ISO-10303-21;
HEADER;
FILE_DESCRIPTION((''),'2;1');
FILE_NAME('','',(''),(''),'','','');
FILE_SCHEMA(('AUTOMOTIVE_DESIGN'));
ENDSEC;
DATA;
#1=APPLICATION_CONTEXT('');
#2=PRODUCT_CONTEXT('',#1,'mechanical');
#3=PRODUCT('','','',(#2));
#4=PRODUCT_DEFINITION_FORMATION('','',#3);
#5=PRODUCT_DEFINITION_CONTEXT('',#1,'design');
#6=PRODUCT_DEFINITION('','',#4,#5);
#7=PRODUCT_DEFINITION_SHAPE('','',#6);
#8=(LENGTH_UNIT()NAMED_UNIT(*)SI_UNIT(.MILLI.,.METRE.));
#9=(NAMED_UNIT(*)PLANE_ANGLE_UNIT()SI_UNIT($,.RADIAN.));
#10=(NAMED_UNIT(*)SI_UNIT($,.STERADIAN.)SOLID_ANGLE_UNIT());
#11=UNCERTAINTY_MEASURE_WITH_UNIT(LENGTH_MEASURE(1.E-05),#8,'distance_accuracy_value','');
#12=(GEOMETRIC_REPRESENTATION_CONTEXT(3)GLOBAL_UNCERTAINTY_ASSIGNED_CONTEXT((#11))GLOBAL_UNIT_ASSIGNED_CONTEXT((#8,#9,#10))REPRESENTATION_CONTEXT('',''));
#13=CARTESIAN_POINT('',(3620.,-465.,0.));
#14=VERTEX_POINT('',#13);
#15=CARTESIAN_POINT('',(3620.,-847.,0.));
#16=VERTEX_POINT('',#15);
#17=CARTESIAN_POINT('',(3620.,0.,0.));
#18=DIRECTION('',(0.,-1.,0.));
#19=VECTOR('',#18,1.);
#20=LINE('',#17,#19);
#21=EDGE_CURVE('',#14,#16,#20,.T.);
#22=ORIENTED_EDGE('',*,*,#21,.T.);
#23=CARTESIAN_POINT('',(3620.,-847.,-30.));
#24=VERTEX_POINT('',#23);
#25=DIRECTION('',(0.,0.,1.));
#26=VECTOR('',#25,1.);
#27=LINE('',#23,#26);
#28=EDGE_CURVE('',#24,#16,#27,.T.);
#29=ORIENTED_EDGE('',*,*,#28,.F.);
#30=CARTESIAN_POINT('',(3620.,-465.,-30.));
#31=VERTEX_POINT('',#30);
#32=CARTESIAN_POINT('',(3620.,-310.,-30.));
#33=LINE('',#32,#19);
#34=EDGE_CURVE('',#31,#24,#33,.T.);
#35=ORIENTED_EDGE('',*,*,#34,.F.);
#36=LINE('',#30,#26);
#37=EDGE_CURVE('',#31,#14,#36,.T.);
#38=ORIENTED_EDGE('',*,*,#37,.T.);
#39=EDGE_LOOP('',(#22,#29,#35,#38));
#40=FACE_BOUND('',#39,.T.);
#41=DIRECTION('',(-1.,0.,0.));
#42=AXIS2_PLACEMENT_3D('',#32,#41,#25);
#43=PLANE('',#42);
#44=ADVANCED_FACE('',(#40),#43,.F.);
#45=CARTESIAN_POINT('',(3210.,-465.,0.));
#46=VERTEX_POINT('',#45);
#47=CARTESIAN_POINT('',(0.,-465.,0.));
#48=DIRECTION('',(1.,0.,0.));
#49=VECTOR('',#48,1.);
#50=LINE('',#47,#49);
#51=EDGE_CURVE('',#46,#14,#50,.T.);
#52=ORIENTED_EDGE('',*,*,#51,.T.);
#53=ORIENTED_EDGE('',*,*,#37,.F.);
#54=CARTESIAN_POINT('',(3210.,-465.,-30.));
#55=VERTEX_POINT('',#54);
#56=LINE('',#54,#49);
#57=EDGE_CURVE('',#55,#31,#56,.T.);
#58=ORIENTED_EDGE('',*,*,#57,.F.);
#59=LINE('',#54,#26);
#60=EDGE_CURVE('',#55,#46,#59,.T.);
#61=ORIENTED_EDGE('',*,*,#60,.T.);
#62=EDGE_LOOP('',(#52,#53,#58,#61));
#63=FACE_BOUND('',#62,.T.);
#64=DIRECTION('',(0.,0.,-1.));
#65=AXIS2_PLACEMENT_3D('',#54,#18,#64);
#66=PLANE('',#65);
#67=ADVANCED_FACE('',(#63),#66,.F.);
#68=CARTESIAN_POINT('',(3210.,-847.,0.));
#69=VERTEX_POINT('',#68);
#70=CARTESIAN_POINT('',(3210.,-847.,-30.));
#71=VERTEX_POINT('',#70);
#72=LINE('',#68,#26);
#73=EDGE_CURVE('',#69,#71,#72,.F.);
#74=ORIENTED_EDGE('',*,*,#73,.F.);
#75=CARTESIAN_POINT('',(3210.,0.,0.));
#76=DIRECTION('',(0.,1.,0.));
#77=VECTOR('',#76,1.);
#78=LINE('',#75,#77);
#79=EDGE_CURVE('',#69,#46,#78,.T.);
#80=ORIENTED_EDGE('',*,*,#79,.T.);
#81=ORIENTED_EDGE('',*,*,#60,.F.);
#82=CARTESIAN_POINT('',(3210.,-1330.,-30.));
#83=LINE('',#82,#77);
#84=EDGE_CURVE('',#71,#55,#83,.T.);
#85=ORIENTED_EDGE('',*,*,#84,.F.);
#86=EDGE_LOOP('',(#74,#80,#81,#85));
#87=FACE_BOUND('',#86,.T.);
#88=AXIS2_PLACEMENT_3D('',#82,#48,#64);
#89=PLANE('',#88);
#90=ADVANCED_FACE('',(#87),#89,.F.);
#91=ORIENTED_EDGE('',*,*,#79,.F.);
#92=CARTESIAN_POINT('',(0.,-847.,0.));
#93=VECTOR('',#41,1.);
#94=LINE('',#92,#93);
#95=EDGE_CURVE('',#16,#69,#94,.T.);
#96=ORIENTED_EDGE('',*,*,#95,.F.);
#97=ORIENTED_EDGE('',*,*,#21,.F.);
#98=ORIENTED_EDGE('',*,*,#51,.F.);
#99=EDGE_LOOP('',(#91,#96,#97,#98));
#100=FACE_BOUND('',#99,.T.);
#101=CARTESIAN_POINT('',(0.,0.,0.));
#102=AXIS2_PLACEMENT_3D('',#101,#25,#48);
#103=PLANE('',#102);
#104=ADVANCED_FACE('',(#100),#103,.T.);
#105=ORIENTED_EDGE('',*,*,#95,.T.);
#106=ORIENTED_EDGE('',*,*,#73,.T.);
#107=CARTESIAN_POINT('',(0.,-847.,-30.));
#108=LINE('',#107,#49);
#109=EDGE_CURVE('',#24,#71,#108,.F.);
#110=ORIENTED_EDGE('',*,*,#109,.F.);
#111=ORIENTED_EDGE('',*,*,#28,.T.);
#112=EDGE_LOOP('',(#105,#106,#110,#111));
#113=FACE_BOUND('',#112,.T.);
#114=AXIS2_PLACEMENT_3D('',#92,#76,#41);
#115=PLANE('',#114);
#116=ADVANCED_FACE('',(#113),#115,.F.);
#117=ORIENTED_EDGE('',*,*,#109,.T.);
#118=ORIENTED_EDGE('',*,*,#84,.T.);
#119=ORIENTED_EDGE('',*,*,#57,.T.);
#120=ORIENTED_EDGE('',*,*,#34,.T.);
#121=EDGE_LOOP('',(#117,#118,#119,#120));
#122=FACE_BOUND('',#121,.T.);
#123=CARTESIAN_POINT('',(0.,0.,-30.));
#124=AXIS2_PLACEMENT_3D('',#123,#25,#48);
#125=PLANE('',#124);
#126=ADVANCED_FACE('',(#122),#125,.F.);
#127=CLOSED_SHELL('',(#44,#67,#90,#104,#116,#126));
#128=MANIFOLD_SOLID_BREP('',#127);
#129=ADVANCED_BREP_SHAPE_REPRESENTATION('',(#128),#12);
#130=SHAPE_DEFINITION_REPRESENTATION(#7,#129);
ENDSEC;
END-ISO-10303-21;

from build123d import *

# Parameters (mm, degrees)
TABAN_FLAN_1_DEPTH          = 30
KES_EKSTR_ZYON1_DEPTH       = 6325.626471184
KES_EKSTR_ZYON1_DEPTH_BACK  = 6325.626471184
IZIM2_W                     = 3213
IZIM2_H                     = 310
IZIM3_W                     = 24
IZIM3_H                     = 2000
SEKME1_DEPTH                = 30
KES_EKSTR_ZYON2_DEPTH       = 6348.399152409
KES_EKSTR_ZYON2_DEPTH_BACK  = 6348.399152409
IZIM4_W                     = 3210
IZIM4_H                     = 305
KES_EKSTR_ZYON3_DEPTH       = 6348.399152409
KES_EKSTR_ZYON3_DEPTH_BACK  = 6348.399152409
IZIM5_W                     = 3210
IZIM5_H                     = 405
KES_EKSTR_ZYON4_DEPTH       = 6348.399152409
KES_EKSTR_ZYON4_DEPTH_BACK  = 6348.399152409
IZIM6_W                     = 2910
IZIM6_H                     = 310
IZIM6_W_2                   = 300
IZIM7_W                     = 2811
IZIM7_H                     = 5
SEKME2_DEPTH                = 30
CUT_EXTRUDE1_DEPTH          = 6349.976374188
CUT_EXTRUDE1_DEPTH_BACK     = 6349.976374188
SKETCH1_W                   = 2835
SKETCH1_H                   = 1158
KES_EKSTR_ZYON5_DEPTH       = 6084.328447487
KES_EKSTR_ZYON5_DEPTH_BACK  = 6084.328447487
IZIM9_W                     = 2635
IZIM9_H                     = 310
IZIM10_W                    = 575
IZIM10_H                    = 2
SEKME3_DEPTH                = 30
KES_EKSTR_ZYON6_DEPTH       = 6084.328447487
KES_EKSTR_ZYON6_DEPTH_BACK  = 6084.328447487
IZIM13_W                    = 575
IZIM13_H                    = 2
KES_EKSTR_ZYON7_DEPTH       = 6084.328447487
KES_EKSTR_ZYON7_DEPTH_BACK  = 6084.328447487
KES_EKSTR_ZYON8_DEPTH       = 5441.42139912
KES_EKSTR_ZYON8_DEPTH_BACK  = 5441.42139912
IZIM16_W                    = 4
IZIM16_H                    = 537
KES_EKSTR_ZYON9_DEPTH       = 5437.470270313
KES_EKSTR_ZYON9_DEPTH_BACK  = 5437.470270313
IZIM17_W                    = 1750
IZIM17_H                    = 537
KES_EKSTR_ZYON10_DEPTH      = 3718.890396448
KES_EKSTR_ZYON10_DEPTH_BACK = 3718.890396448
IZIM18_W                    = 410
IZIM18_H                    = 155


# Sheet-metal steps are written as plain solids
with BuildPart() as part:
    # Çizim1 → Taban-Flanş1 (new body)
    with BuildSketch(Plane.XY):
        Polygon((0, 0), (0, -1640), (3210, -1640), (3210, -2000), (6000, -2000), (6000, 0), align=None)
    extrude(amount=-TABAN_FLAN_1_DEPTH)

    # Çizim2 → Kes-Ekstrüzyon1 (cut, two sides: drawn at the far end of the back side and taken through both)
    with BuildSketch(Plane.XY.offset(-KES_EKSTR_ZYON1_DEPTH_BACK)):
        with Locations((1606.5, -1485)):
            Rectangle(IZIM2_W, IZIM2_H)
    extrude(amount=KES_EKSTR_ZYON1_DEPTH + KES_EKSTR_ZYON1_DEPTH_BACK, mode=Mode.SUBTRACT)

    # Çizim3 → Sekme1 (add)
    with BuildSketch(Plane.XY):
        with Locations((6012, -1000)):
            Rectangle(IZIM3_W, IZIM3_H)
    extrude(amount=-SEKME1_DEPTH)

    # Çizim4 → Kes-Ekstrüzyon2 (cut, two sides: drawn at the far end of the back side and taken through both)
    with BuildSketch(Plane.XY.offset(-KES_EKSTR_ZYON2_DEPTH_BACK)):
        with Locations((1605, -1177.5)):
            Rectangle(IZIM4_W, IZIM4_H)
    extrude(amount=KES_EKSTR_ZYON2_DEPTH + KES_EKSTR_ZYON2_DEPTH_BACK, mode=Mode.SUBTRACT)

    # Çizim5 → Kes-Ekstrüzyon3 (cut, two sides: drawn at the far end of the back side and taken through both)
    with BuildSketch(Plane.XY.offset(-KES_EKSTR_ZYON3_DEPTH_BACK)):
        with Locations((1605, -822.5)):
            Rectangle(IZIM5_W, IZIM5_H)
    extrude(amount=KES_EKSTR_ZYON3_DEPTH + KES_EKSTR_ZYON3_DEPTH_BACK, mode=Mode.SUBTRACT)

    # Çizim6 → Kes-Ekstrüzyon4 (cut, two sides: drawn at the far end of the back side and taken through both)
    with BuildSketch(Plane.XY.offset(-KES_EKSTR_ZYON4_DEPTH_BACK)):
        with Locations((1455, -465)):
            Rectangle(IZIM6_W, IZIM6_H)
        with Locations((3060, -465)):
            Rectangle(IZIM6_W_2, IZIM6_H)
    extrude(amount=KES_EKSTR_ZYON4_DEPTH + KES_EKSTR_ZYON4_DEPTH_BACK, mode=Mode.SUBTRACT)

    # Çizim7 → Sekme2 (add)
    with BuildSketch(Plane.XY):
        with Locations((4618.5, -2002.5)):
            Rectangle(IZIM7_W, IZIM7_H)
    extrude(amount=-SEKME2_DEPTH)

    # Sketch1 → Cut-Extrude1 (cut, two sides: drawn at the far end of the back side and taken through both)
    with BuildSketch(Plane.XY.offset(-CUT_EXTRUDE1_DEPTH_BACK)):
        with Locations((4627.5, -1426)):
            Rectangle(SKETCH1_W, SKETCH1_H)
    extrude(amount=CUT_EXTRUDE1_DEPTH + CUT_EXTRUDE1_DEPTH_BACK, mode=Mode.SUBTRACT)

    # Çizim9 → Kes-Ekstrüzyon5 (cut, two sides: drawn at the far end of the back side and taken through both)
    with BuildSketch(Plane.XY.offset(-KES_EKSTR_ZYON5_DEPTH_BACK)):
        with Locations((1317.5, -155)):
            Rectangle(IZIM9_W, IZIM9_H)
    extrude(amount=KES_EKSTR_ZYON5_DEPTH + KES_EKSTR_ZYON5_DEPTH_BACK, mode=Mode.SUBTRACT)

    # Çizim10 → Sekme3 (add)
    with BuildSketch(Plane.XY):
        with Locations((2922.5, -311)):
            Rectangle(IZIM10_W, IZIM10_H)
    extrude(amount=-SEKME3_DEPTH)

    # Çizim13 → Kes-Ekstrüzyon6 (cut, two sides: drawn at the far end of the back side and taken through both)
    with BuildSketch(Plane.XY.offset(-KES_EKSTR_ZYON6_DEPTH_BACK)):
        Polygon((5145, 0), (2635, 0), (2635, -310), (3210, -310), (5145, -310), align=None)
        with Locations((2922.5, -311)):
            Rectangle(IZIM13_W, IZIM13_H)
    extrude(amount=KES_EKSTR_ZYON6_DEPTH + KES_EKSTR_ZYON6_DEPTH_BACK, mode=Mode.SUBTRACT)

    # Çizim15 → Kes-Ekstrüzyon7 (cut, two sides: drawn at the far end of the back side and taken through both)
    with BuildSketch(Plane.XY.offset(-KES_EKSTR_ZYON7_DEPTH_BACK)):
        Polygon((5145, 0), (5145, -310), (5374, -310), (5374, -847), (6024, -847), (6024, 0), align=None)
    extrude(amount=KES_EKSTR_ZYON7_DEPTH + KES_EKSTR_ZYON7_DEPTH_BACK, mode=Mode.SUBTRACT)

    # Çizim16 → Kes-Ekstrüzyon8 (cut, two sides: drawn at the far end of the back side and taken through both)
    with BuildSketch(Plane.XY.offset(-KES_EKSTR_ZYON8_DEPTH_BACK)):
        with Locations((5372, -578.5)):
            Rectangle(IZIM16_W, IZIM16_H)
    extrude(amount=KES_EKSTR_ZYON8_DEPTH + KES_EKSTR_ZYON8_DEPTH_BACK, mode=Mode.SUBTRACT)

    # Çizim17 → Kes-Ekstrüzyon9 (cut, two sides: drawn at the far end of the back side and taken through both)
    with BuildSketch(Plane.XY.offset(-KES_EKSTR_ZYON9_DEPTH_BACK)):
        with Locations((4495, -578.5)):
            Rectangle(IZIM17_W, IZIM17_H)
    extrude(amount=KES_EKSTR_ZYON9_DEPTH + KES_EKSTR_ZYON9_DEPTH_BACK, mode=Mode.SUBTRACT)

    # Çizim18 → Kes-Ekstrüzyon10 (cut, two sides: drawn at the far end of the back side and taken through both)
    with BuildSketch(Plane.XY.offset(-KES_EKSTR_ZYON10_DEPTH_BACK)):
        with Locations((3415, -387.5)):
            Rectangle(IZIM18_W, IZIM18_H)
    extrude(amount=KES_EKSTR_ZYON10_DEPTH + KES_EKSTR_ZYON10_DEPTH_BACK, mode=Mode.SUBTRACT)


solid = part.part
